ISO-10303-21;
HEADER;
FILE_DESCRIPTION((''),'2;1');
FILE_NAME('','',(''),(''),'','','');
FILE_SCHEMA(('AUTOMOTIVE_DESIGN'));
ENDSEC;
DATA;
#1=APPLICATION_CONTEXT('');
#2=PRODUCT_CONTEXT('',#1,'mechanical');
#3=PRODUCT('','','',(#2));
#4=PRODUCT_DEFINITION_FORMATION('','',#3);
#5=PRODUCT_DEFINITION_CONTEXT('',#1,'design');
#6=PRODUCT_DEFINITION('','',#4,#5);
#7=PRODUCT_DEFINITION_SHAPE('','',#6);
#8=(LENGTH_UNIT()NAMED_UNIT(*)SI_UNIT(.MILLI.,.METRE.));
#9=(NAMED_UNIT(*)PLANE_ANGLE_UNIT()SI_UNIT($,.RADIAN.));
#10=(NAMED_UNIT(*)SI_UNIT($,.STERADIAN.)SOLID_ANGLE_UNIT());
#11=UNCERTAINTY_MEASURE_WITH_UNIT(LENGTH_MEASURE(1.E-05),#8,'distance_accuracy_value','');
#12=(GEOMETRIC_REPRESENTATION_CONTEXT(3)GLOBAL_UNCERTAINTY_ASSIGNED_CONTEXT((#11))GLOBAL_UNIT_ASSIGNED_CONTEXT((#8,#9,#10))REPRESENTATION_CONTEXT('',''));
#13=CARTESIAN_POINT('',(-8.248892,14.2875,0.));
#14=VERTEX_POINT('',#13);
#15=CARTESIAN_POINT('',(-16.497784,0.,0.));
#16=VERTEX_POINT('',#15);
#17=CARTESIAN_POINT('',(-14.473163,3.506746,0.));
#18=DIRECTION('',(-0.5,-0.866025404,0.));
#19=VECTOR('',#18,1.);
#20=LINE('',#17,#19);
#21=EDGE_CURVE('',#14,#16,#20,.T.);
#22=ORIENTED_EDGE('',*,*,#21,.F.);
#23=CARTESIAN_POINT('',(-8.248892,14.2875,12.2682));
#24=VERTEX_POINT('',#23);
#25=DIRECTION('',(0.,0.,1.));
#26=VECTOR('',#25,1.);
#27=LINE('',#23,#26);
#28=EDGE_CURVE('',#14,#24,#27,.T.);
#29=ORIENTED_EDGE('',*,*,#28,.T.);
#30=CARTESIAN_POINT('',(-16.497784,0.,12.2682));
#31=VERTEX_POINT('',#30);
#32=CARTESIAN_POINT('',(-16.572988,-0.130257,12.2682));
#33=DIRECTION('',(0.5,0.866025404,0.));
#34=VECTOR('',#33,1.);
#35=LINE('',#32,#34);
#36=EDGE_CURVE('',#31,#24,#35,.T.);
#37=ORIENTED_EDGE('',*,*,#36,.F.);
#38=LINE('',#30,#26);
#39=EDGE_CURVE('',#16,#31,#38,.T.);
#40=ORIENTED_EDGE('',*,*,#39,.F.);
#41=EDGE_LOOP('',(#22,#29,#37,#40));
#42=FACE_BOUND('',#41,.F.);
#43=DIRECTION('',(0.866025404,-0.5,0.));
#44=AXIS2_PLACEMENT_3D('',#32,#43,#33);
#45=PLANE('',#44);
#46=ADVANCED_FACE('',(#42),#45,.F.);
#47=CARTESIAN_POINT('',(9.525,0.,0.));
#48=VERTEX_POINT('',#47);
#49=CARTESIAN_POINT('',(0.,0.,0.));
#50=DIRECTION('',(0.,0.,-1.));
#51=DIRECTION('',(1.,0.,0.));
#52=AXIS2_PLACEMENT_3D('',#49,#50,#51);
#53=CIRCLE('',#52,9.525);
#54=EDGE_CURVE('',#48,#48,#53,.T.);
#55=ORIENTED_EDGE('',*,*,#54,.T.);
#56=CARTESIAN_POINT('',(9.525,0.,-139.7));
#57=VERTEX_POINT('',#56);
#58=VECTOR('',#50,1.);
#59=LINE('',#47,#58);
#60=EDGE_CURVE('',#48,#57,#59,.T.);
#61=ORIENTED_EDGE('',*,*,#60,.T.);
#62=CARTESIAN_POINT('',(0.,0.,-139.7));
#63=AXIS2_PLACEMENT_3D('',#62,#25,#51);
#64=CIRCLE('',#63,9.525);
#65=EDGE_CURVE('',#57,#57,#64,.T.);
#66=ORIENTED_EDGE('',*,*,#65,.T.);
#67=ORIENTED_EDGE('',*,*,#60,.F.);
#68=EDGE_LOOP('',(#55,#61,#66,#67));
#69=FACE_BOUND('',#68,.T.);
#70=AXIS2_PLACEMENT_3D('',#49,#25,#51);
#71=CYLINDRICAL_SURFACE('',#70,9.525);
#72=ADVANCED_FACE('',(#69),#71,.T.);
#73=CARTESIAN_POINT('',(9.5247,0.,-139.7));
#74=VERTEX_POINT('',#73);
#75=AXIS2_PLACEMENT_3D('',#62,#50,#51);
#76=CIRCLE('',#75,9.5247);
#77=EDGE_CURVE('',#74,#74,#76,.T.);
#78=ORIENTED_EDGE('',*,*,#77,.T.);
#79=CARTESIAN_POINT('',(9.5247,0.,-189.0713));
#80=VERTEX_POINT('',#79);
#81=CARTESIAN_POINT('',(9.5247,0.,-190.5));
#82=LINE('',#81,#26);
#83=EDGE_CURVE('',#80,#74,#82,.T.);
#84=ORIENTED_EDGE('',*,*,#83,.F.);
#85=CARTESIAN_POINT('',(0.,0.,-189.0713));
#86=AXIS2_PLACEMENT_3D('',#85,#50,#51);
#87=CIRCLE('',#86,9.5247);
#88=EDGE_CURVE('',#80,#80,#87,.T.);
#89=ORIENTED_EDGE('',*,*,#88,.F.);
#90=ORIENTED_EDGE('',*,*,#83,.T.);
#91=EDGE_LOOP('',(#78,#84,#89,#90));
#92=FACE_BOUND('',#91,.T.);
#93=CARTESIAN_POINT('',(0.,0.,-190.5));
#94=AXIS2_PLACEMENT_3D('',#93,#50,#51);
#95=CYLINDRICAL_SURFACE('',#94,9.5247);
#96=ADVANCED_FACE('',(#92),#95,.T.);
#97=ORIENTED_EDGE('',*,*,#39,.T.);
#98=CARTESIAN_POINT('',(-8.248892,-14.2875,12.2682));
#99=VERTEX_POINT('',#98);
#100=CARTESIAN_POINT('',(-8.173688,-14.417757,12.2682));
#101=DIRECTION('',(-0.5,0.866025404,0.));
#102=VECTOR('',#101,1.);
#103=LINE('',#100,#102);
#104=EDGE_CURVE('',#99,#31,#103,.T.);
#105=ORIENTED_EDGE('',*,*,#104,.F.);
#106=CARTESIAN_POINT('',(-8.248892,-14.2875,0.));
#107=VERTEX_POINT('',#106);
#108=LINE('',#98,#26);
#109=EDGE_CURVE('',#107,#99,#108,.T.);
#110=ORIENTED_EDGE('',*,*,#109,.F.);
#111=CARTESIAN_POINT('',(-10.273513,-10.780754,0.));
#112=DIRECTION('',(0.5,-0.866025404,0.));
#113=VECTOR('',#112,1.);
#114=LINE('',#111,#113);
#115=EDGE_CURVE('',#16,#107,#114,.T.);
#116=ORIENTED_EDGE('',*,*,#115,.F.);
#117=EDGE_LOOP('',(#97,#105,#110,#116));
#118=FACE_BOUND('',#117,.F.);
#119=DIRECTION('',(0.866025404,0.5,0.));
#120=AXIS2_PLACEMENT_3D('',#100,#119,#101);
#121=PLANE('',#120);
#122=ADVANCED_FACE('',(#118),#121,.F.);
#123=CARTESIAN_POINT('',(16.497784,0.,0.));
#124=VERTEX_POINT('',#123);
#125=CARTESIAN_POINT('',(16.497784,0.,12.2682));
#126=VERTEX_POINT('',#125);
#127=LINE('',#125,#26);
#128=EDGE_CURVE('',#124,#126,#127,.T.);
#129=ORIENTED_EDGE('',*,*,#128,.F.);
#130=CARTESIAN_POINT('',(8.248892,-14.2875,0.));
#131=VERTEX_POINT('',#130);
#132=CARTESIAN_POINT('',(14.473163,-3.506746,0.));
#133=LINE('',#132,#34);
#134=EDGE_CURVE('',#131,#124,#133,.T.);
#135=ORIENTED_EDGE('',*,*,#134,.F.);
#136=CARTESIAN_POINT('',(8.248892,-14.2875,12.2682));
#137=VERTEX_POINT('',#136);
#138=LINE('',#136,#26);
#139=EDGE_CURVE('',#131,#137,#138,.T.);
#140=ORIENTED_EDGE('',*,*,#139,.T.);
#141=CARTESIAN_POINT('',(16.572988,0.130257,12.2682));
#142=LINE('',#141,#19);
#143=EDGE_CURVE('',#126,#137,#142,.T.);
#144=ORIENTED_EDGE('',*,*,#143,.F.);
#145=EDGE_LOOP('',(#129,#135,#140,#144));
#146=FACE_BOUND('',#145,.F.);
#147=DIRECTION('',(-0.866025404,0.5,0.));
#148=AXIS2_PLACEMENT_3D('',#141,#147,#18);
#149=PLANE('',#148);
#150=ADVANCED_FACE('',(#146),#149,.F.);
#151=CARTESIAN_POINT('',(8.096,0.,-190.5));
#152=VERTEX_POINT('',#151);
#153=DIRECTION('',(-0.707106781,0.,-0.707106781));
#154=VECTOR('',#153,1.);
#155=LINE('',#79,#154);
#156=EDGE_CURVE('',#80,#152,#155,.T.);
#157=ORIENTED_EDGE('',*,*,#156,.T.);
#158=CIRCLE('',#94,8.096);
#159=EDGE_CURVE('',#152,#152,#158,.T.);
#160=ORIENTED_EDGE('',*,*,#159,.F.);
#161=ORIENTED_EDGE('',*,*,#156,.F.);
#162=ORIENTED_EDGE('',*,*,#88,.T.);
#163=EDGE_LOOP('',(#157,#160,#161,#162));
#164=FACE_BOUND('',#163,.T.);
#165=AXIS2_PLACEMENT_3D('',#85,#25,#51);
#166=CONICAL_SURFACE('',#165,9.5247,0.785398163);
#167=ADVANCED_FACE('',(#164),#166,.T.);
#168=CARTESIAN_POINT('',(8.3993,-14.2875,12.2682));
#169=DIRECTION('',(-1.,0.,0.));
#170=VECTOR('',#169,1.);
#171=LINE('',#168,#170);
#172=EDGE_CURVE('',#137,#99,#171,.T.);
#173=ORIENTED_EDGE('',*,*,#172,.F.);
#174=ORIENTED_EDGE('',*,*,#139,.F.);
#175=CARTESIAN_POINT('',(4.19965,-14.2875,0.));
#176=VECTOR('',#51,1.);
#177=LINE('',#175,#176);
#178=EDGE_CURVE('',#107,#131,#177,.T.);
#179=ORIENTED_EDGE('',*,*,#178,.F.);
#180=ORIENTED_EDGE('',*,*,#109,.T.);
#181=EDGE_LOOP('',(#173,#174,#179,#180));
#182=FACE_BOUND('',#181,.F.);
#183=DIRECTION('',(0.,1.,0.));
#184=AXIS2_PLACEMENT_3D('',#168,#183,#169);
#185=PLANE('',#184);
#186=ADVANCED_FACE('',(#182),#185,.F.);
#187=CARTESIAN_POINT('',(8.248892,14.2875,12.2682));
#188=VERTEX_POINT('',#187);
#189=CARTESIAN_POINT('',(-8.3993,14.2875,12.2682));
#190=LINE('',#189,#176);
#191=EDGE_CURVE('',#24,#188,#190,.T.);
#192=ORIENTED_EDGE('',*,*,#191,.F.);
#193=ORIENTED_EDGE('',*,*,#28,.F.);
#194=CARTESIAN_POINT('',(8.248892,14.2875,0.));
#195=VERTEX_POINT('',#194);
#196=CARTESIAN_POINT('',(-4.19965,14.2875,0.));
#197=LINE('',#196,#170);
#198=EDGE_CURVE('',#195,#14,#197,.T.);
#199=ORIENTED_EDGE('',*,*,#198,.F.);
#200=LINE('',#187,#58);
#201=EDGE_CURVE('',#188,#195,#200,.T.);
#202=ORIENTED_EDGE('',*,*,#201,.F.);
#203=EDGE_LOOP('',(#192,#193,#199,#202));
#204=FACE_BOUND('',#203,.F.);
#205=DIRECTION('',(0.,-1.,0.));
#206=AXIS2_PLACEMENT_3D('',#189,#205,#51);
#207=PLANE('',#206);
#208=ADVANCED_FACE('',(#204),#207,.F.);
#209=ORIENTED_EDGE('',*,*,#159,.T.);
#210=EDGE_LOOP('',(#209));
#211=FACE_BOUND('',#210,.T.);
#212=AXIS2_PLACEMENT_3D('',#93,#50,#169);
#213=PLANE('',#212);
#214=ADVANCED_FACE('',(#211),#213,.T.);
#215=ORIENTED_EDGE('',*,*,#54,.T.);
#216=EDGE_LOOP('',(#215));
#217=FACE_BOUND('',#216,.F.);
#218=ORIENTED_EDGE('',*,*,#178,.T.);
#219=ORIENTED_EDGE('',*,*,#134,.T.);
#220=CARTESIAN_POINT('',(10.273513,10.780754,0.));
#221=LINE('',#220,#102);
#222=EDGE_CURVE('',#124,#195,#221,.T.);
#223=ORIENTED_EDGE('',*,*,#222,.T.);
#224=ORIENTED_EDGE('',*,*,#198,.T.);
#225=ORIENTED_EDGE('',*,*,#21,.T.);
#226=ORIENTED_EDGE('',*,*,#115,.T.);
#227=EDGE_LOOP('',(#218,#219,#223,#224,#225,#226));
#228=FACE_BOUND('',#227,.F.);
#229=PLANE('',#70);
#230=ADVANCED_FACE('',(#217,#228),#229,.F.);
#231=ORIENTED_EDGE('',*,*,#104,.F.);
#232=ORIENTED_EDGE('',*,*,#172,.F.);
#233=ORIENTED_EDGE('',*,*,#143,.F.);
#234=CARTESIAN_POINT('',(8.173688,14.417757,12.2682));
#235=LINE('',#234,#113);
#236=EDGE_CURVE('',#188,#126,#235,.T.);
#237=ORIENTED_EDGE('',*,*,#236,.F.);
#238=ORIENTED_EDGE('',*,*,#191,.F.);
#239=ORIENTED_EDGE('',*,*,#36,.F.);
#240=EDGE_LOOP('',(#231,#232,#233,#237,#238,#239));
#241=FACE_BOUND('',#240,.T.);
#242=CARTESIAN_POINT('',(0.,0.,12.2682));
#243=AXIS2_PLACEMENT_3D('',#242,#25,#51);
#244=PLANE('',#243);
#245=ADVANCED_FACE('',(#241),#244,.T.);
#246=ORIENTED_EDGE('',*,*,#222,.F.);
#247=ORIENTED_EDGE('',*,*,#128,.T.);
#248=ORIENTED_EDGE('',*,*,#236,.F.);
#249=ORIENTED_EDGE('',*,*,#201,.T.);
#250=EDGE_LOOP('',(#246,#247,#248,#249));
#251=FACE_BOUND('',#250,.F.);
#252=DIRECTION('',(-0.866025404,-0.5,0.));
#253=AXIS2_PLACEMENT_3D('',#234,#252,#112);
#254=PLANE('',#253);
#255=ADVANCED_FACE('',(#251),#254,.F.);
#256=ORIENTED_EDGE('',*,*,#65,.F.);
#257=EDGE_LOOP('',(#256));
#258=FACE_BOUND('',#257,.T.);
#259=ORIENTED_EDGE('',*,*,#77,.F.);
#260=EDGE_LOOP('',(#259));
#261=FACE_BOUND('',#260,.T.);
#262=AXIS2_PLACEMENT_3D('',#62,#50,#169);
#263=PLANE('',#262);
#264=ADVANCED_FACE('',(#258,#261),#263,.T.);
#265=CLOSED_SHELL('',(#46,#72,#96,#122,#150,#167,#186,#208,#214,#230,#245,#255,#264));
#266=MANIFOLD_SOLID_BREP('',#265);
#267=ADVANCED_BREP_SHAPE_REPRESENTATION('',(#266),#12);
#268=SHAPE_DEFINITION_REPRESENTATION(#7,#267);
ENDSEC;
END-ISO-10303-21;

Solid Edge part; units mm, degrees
sketch "Sketch1" plane through (0, 0, 0) normal (0, 0, 1) x (1, 0, 0)
  circle A0 centre (0, 0) radius 16.5735
  dimension "D1" = 33.147
extrude "Protrusion1" add sketch "Sketch1" along normal blind 12.2682
sketch "Sketch2" plane through (0, 0, 0) normal (0, 0, -1) x (1, 0, 0)
  circle A0 centre (0, 0) radius 9.525
extrude "Protrusion2" add sketch "Sketch2" along normal blind 190.5
sketch "Sketch3" plane through (0, 0, -190.5) normal (0, 0, -1) x (1, 0, 0)
  circle A0 centre (0, 0) radius 9.5247
extrude "Cutout1" cut sketch "Sketch3" against normal blind 50.8 flip side to cut
chamfer "Chamfer_1" distance 1.4287 angle 45 1 edges at (-9.5247, 0, -190.5)
sketch "Sketch4" plane through (0, 0, 12.2682) normal (0, 0, 1) x (1, 0, 0)
  line L0 (-8.3993, 14.2875) -> (8.3993, 14.2875)
  dimension "D1" = 28.575
extrude "Cutout2" cut sketch "Sketch4" against normal up to next material side at (0, 14.3375, 12.2682)
pattern_circular "Pattern1" count 6 over 360 about axis through (0, 0, 12.2682) along (0, 0, 1) of "Cutout2"
properties part number "24103544"
